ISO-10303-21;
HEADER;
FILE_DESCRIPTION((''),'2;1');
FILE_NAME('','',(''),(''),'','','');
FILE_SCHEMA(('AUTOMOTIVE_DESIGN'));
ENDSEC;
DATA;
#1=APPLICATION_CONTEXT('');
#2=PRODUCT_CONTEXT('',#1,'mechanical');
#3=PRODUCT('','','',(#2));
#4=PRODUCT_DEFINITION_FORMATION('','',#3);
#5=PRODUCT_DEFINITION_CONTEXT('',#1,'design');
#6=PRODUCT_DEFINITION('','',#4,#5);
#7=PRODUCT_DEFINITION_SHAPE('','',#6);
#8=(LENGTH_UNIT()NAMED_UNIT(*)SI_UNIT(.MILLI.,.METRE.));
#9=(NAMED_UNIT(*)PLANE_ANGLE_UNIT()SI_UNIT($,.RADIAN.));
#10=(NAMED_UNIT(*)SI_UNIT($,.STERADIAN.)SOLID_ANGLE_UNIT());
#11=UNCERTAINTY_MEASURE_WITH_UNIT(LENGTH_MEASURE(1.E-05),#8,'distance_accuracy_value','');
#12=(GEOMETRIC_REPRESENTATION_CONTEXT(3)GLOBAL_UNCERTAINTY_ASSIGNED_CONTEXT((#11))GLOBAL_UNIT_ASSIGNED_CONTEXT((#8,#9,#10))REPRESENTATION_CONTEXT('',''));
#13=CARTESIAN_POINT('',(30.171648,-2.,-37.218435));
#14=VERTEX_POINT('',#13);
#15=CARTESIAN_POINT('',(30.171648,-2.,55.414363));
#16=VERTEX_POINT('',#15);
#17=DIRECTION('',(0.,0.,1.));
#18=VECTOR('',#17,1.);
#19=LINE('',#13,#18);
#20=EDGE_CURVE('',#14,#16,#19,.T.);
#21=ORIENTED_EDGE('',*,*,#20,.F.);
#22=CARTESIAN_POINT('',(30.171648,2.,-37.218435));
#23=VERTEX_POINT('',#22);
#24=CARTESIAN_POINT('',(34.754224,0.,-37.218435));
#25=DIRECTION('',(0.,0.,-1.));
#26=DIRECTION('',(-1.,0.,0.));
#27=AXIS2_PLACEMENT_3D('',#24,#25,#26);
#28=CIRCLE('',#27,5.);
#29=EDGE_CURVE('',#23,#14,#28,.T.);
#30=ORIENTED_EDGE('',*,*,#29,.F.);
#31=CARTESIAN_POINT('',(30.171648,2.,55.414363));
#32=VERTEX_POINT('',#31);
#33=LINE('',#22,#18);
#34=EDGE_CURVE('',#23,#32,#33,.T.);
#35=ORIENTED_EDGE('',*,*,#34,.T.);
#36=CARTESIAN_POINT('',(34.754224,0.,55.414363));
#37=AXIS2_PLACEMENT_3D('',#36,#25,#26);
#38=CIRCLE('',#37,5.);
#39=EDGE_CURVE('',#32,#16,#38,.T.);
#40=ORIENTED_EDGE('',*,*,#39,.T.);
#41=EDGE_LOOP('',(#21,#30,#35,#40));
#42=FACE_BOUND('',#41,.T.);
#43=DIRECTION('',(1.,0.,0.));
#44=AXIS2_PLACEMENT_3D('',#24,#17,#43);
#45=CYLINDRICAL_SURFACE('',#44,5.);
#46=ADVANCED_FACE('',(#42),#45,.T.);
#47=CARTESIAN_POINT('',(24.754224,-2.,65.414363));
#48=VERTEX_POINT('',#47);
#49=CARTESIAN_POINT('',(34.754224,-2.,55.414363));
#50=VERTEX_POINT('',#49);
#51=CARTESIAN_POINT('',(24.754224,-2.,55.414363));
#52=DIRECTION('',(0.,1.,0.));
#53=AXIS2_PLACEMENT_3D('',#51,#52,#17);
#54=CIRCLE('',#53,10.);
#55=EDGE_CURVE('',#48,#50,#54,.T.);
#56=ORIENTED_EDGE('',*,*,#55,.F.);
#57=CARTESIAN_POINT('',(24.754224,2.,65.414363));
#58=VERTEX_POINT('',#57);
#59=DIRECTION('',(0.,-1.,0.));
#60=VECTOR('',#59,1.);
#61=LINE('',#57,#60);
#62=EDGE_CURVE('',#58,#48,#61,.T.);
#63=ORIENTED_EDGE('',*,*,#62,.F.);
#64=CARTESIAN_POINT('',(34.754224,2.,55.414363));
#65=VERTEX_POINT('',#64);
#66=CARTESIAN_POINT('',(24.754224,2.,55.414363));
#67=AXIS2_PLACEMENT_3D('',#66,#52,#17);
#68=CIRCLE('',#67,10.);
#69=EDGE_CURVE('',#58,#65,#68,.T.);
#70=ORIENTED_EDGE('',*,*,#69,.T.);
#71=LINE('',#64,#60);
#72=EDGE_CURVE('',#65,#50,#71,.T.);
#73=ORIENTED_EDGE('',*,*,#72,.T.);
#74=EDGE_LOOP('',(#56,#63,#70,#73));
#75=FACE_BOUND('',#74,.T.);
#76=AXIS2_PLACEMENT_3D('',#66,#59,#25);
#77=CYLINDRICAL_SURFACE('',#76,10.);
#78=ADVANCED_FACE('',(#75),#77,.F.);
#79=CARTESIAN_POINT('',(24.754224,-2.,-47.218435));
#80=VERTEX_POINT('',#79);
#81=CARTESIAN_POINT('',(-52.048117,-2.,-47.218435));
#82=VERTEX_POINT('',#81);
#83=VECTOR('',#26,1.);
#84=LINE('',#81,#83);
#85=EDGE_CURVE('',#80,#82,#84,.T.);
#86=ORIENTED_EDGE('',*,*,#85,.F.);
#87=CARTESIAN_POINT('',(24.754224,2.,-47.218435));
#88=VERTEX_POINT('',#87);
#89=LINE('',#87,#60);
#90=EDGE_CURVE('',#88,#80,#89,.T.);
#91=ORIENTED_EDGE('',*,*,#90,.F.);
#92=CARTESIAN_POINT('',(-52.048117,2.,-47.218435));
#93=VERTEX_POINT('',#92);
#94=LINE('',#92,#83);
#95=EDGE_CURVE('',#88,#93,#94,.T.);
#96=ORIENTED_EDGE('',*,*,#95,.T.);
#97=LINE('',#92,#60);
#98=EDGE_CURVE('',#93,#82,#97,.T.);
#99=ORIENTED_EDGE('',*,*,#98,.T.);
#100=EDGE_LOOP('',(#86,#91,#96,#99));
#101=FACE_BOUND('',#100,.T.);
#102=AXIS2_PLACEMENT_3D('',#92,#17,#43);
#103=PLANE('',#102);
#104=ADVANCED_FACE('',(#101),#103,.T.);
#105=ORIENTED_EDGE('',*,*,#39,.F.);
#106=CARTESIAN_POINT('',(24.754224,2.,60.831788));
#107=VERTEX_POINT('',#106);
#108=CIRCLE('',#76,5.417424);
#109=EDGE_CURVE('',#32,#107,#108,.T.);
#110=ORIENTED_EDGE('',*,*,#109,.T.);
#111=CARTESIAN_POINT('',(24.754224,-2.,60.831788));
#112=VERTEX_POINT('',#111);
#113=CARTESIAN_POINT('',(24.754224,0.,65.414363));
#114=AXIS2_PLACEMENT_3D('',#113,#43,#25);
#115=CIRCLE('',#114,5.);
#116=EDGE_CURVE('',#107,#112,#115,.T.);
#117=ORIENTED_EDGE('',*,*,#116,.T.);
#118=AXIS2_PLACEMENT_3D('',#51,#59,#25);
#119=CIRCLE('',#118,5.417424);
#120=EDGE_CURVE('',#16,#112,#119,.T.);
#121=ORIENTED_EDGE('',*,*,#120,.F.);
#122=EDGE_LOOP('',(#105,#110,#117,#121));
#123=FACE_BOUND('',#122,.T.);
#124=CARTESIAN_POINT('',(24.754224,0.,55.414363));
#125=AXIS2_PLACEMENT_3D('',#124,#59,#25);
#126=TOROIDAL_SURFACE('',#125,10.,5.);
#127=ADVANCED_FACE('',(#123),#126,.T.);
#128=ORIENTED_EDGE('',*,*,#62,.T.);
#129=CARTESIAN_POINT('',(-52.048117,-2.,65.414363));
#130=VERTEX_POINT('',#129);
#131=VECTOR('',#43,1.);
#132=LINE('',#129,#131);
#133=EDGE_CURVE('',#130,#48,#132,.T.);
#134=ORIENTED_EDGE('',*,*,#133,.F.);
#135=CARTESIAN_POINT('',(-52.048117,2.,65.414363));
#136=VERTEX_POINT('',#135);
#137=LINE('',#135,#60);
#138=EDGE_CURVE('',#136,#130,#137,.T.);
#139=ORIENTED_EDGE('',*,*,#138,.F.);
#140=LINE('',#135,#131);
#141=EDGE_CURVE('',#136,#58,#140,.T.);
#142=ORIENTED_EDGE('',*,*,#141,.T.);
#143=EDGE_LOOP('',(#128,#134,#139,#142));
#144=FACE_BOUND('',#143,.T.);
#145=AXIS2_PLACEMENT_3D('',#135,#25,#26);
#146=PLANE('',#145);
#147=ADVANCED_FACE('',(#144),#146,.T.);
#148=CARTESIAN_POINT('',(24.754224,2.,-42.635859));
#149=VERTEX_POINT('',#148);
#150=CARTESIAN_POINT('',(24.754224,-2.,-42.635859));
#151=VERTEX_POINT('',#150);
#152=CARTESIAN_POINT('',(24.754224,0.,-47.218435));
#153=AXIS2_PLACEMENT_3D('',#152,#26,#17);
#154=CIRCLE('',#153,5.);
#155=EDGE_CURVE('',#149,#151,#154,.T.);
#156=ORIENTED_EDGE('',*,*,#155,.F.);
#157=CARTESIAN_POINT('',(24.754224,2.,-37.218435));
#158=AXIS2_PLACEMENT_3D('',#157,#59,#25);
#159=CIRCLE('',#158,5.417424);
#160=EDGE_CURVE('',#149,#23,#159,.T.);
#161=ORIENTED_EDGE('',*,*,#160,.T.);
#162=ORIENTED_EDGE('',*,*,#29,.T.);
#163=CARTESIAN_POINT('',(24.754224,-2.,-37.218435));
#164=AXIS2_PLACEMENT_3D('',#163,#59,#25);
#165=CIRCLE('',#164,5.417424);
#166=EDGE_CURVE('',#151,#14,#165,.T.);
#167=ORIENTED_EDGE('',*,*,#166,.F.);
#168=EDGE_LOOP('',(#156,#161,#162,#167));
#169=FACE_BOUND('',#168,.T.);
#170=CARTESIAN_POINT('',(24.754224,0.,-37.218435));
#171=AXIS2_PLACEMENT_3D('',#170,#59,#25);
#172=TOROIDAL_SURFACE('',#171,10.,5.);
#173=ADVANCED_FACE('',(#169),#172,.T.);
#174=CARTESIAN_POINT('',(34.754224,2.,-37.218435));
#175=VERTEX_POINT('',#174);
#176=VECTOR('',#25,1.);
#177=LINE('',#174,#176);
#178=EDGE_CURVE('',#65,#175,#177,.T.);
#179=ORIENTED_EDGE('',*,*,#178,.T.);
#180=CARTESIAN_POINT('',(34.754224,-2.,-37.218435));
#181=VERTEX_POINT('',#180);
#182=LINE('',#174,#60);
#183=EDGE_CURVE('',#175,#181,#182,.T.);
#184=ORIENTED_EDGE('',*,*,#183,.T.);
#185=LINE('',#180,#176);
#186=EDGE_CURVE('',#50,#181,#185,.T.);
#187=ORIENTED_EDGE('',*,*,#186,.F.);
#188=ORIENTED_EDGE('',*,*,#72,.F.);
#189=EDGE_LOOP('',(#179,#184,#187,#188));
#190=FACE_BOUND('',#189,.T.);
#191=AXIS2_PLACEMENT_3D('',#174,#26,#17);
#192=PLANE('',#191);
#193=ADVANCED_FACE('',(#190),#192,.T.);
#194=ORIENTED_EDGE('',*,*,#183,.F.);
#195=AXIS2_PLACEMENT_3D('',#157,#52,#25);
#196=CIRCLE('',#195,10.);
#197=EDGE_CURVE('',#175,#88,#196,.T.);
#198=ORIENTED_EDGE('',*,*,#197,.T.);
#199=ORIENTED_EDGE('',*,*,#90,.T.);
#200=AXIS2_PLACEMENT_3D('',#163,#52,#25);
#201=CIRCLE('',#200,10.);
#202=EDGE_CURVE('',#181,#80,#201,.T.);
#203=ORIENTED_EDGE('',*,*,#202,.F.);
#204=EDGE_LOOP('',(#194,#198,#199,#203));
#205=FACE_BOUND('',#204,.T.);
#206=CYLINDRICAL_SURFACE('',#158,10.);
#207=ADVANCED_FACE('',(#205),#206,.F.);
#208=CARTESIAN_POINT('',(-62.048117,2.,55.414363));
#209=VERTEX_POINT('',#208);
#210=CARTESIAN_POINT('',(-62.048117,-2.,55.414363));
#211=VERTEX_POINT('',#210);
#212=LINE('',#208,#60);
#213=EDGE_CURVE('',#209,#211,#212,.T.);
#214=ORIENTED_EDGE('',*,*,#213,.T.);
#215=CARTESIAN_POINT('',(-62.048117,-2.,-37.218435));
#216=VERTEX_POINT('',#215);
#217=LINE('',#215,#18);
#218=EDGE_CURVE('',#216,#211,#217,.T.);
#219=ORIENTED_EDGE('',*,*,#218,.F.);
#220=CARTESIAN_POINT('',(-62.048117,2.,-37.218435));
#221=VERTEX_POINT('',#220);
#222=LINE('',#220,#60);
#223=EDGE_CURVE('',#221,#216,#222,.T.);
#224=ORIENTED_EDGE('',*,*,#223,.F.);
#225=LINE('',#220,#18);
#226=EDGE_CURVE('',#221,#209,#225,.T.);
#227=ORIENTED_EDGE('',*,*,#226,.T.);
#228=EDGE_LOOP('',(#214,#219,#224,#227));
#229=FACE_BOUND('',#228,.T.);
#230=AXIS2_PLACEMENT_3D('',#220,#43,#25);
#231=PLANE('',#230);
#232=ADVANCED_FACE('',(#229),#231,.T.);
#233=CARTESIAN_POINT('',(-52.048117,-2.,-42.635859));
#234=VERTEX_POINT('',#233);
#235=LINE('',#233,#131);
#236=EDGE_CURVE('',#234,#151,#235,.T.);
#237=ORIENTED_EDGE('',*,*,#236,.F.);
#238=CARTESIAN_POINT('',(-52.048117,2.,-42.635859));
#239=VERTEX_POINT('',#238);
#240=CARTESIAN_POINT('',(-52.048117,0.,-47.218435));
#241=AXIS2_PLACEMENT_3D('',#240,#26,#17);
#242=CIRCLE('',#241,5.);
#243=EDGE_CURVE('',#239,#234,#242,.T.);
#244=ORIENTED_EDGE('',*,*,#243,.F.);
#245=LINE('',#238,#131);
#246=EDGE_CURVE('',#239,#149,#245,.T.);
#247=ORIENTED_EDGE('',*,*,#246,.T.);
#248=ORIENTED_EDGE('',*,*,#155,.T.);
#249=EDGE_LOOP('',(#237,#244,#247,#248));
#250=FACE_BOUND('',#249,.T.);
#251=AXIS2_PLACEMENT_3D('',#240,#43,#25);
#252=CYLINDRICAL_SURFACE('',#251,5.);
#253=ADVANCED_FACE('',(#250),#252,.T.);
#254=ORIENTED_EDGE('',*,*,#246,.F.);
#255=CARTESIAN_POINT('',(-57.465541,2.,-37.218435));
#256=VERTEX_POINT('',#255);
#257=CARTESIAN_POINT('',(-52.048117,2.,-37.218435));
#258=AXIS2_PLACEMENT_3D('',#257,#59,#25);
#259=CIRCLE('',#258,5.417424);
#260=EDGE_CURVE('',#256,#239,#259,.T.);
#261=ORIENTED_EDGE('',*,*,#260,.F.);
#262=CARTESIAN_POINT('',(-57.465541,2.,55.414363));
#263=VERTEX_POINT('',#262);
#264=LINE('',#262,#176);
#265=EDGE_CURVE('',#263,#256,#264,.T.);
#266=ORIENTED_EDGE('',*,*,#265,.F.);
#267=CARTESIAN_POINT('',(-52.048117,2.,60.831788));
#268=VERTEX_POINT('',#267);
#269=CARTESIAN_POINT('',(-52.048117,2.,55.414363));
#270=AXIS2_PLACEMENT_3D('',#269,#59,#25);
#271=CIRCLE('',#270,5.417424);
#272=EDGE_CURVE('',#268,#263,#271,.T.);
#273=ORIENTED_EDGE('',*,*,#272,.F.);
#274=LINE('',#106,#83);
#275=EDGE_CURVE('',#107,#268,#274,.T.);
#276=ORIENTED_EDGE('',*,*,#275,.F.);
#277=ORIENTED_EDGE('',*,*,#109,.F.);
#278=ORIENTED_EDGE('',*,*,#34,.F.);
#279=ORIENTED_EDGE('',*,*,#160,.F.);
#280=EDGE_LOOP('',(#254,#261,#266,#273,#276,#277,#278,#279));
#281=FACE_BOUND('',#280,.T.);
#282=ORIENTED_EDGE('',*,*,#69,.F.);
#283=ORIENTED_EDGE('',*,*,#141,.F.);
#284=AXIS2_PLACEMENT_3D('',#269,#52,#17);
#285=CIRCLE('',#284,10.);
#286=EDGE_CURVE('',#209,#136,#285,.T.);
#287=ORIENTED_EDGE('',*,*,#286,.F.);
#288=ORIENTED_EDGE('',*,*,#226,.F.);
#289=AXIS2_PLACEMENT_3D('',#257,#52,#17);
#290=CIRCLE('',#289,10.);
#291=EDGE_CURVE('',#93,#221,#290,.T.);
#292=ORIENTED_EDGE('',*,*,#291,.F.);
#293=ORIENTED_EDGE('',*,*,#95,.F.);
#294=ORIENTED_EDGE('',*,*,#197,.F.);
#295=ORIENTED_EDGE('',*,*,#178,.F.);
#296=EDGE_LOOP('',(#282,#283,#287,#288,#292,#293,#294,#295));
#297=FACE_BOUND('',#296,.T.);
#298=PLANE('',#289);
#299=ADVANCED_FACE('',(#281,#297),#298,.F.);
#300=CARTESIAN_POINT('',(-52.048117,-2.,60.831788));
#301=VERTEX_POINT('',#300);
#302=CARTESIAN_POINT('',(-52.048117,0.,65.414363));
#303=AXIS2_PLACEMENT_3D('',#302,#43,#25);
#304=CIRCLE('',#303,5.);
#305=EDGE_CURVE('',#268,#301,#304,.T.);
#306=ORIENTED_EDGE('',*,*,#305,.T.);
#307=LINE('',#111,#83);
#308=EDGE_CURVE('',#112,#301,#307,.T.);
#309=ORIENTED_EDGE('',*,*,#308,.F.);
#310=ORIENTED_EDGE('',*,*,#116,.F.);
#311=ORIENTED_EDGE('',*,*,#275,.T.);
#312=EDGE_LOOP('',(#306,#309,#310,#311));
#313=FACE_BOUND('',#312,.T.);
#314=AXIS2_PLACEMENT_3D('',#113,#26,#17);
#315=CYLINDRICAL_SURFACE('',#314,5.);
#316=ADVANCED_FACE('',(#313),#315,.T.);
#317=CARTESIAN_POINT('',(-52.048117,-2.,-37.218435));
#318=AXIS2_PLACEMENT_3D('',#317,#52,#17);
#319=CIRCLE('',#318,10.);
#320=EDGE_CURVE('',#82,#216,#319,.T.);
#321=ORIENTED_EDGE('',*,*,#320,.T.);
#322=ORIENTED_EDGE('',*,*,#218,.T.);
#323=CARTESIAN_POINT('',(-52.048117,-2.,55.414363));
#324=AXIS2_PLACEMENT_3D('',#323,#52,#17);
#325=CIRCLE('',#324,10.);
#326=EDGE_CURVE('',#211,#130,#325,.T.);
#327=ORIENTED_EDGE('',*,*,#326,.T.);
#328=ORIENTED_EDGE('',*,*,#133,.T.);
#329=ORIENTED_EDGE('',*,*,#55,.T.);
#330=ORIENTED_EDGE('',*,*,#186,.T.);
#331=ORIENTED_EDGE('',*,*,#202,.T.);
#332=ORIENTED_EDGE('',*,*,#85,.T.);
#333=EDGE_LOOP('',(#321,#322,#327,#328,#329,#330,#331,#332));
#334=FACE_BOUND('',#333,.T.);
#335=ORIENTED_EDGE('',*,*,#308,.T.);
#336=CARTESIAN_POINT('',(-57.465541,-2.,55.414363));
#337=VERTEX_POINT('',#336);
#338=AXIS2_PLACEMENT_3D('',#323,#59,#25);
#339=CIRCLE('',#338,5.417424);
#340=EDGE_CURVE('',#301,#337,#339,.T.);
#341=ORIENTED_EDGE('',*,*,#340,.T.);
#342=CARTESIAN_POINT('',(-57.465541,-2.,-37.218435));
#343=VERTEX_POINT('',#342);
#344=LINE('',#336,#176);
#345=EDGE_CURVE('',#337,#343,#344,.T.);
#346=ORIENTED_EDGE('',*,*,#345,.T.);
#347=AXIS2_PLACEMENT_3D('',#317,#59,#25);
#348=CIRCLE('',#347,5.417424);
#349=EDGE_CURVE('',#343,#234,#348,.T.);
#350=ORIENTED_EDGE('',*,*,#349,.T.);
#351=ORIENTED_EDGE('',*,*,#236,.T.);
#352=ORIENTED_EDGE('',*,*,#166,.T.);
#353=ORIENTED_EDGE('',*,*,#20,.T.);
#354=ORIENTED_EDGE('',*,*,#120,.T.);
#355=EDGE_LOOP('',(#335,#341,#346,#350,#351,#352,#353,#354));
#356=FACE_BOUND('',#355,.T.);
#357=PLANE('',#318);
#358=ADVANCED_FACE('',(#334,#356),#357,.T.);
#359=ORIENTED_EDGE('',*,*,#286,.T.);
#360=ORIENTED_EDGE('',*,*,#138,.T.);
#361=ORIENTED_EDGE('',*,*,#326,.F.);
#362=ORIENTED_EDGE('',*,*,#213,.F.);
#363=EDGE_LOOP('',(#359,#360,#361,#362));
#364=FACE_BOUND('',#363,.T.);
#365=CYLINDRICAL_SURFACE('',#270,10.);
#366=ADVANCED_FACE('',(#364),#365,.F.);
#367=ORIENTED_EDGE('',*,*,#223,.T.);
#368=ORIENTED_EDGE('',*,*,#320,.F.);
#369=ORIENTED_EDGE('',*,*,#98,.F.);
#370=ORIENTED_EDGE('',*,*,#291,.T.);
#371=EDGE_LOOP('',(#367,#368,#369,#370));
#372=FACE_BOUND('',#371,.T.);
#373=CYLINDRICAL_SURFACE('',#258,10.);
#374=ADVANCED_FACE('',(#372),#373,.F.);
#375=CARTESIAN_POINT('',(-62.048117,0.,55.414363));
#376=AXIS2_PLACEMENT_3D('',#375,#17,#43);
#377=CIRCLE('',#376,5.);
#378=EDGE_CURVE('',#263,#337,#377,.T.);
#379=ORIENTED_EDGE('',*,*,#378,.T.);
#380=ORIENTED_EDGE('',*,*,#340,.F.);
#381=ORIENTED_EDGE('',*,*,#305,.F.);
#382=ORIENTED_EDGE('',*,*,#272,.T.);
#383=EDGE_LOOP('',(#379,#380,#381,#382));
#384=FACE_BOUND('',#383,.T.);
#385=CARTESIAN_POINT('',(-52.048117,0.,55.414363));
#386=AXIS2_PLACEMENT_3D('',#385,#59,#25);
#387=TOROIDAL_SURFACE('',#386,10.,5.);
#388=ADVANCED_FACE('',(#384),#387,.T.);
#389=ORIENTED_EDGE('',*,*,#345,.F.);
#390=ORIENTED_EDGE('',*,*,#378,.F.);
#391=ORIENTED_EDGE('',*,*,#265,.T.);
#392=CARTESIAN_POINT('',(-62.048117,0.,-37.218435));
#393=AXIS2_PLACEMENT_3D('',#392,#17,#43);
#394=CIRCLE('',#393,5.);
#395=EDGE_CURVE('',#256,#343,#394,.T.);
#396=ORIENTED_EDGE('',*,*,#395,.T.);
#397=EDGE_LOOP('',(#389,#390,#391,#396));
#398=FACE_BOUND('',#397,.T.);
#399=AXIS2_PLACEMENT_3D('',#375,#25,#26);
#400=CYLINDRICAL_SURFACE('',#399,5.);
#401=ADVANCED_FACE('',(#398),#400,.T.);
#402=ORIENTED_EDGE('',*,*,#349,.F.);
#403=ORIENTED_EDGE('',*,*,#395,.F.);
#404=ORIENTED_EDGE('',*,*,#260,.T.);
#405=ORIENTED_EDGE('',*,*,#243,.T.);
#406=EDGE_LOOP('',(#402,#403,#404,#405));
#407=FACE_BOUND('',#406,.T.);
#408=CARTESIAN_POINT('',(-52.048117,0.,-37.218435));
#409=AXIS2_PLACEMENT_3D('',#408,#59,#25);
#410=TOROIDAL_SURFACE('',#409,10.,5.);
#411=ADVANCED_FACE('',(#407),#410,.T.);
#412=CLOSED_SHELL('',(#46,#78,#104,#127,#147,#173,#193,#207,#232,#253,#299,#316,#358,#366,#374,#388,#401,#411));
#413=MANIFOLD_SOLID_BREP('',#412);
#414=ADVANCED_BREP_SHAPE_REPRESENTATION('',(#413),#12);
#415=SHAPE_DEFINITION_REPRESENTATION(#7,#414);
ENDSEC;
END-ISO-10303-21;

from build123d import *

# Parameters (mm, degrees)
BOSS_EXTRUDE1_DEPTH = 2
SWEEP2_PROFILE_R    = 5
INTERSECT1_START    = -2
INTERSECT1_DEPTH    = 4


# Read off the part's stored shape, not the designer's step: Intersect1
with BuildPart() as part:
    # Sketch1 → Boss-Extrude1 (new, symmetric)
    with BuildSketch(Plane(origin=(0, 0, 0), x_dir=(1, 0, 0), z_dir=(0, 1, 0))):
        with BuildLine():
            Line((-52.048116563, 47.218434745), (24.754223647, 47.218434745))
            ThreePointArc((24.754223647, 47.218434745), (31.825291459, 44.289502557), (34.754223647, 37.218434745))
            Line((34.754223647, 37.218434745), (34.754223647, -55.414363356))
            ThreePointArc((34.754223647, -55.414363356), (31.825291459, -62.485431168), (24.754223647, -65.414363356))
            Line((24.754223647, -65.414363356), (-52.048116563, -65.414363356))
            ThreePointArc((-52.048116563, -65.414363356), (-59.119184375, -62.485431168), (-62.048116563, -55.414363356))
            Line((-62.048116563, -55.414363356), (-62.048116563, 37.218434745))
            ThreePointArc((-62.048116563, 37.218434745), (-59.119184375, 44.289502557), (-52.048116563, 47.218434745))
        make_face()
    extrude(amount=BOSS_EXTRUDE1_DEPTH, both=True)


with BuildPart() as body_2:
    # Sweep2: sweep along a path in Sketch1<3>
    with BuildLine(Plane(origin=(0, 0, 0), x_dir=(1, 0, 0), z_dir=(0, 1, 0))) as sweep2_path:
        Line((-52.048116563, 47.218434745), (24.754223647, 47.218434745))
        ThreePointArc((24.754223647, 47.218434745), (31.825291459, 44.289502557), (34.754223647, 37.218434745))
        Line((34.754223647, 37.218434745), (34.754223647, -55.414363356))
        ThreePointArc((34.754223647, -55.414363356), (31.825291459, -62.485431168), (24.754223647, -65.414363356))
        Line((24.754223647, -65.414363356), (-52.048116563, -65.414363356))
        ThreePointArc((-52.048116563, -65.414363356), (-59.119184375, -62.485431168), (-62.048116563, -55.414363356))
        Line((-62.048116563, -55.414363356), (-62.048116563, 37.218434745))
        ThreePointArc((-62.048116563, 37.218434745), (-59.119184375, 44.289502557), (-52.048116563, 47.218434745))
    # Sweep2 profile (on start of the path) → Sweep2 (sweep)
    with BuildSketch(Plane(origin=(-52.048116563, 0, -47.218434745), x_dir=(0, 0, 1), z_dir=(1, 0, 0))):
        Circle(SWEEP2_PROFILE_R)
    sweep(path=sweep2_path.line)


with BuildPart() as intersect1_tool:
    # Intersect1 outline → Intersect1 (new body)
    with BuildSketch(Plane(origin=(0, 0, 0), x_dir=(1, 0, 0), z_dir=(0, 1, 0)).offset(INTERSECT1_START)):
        with BuildLine():
            ThreePointArc((-52.048116563, 47.218434745), (-59.119184375, 44.289502557), (-62.048116563, 37.218434745))
            Line((-62.048116563, 37.218434745), (-62.048116563, -55.414363356))
            ThreePointArc((-62.048116563, -55.414363356), (-59.119184375, -62.485431168), (-52.048116563, -65.414363356))
            Line((-52.048116563, -65.414363356), (24.754223647, -65.414363356))
            ThreePointArc((24.754223647, -65.414363356), (31.825291459, -62.485431168), (34.754223647, -55.414363356))
            Line((34.754223647, -55.414363356), (34.754223647, 37.218434745))
            ThreePointArc((34.754223647, 37.218434745), (31.825291459, 44.289502557), (24.754223647, 47.218434745))
            Line((24.754223647, 47.218434745), (-52.048116563, 47.218434745))
        make_face()
    extrude(amount=INTERSECT1_DEPTH)


with BuildPart() as part_1:
    add(part.part)

    # Intersect1: cut by intersect1_tool
    add(intersect1_tool.part, mode=Mode.SUBTRACT)


with BuildPart() as body_2_1:
    add(body_2.part)

    # Intersect1: cut by intersect1_tool
    add(intersect1_tool.part, mode=Mode.SUBTRACT)


solid = body_2_1.part
